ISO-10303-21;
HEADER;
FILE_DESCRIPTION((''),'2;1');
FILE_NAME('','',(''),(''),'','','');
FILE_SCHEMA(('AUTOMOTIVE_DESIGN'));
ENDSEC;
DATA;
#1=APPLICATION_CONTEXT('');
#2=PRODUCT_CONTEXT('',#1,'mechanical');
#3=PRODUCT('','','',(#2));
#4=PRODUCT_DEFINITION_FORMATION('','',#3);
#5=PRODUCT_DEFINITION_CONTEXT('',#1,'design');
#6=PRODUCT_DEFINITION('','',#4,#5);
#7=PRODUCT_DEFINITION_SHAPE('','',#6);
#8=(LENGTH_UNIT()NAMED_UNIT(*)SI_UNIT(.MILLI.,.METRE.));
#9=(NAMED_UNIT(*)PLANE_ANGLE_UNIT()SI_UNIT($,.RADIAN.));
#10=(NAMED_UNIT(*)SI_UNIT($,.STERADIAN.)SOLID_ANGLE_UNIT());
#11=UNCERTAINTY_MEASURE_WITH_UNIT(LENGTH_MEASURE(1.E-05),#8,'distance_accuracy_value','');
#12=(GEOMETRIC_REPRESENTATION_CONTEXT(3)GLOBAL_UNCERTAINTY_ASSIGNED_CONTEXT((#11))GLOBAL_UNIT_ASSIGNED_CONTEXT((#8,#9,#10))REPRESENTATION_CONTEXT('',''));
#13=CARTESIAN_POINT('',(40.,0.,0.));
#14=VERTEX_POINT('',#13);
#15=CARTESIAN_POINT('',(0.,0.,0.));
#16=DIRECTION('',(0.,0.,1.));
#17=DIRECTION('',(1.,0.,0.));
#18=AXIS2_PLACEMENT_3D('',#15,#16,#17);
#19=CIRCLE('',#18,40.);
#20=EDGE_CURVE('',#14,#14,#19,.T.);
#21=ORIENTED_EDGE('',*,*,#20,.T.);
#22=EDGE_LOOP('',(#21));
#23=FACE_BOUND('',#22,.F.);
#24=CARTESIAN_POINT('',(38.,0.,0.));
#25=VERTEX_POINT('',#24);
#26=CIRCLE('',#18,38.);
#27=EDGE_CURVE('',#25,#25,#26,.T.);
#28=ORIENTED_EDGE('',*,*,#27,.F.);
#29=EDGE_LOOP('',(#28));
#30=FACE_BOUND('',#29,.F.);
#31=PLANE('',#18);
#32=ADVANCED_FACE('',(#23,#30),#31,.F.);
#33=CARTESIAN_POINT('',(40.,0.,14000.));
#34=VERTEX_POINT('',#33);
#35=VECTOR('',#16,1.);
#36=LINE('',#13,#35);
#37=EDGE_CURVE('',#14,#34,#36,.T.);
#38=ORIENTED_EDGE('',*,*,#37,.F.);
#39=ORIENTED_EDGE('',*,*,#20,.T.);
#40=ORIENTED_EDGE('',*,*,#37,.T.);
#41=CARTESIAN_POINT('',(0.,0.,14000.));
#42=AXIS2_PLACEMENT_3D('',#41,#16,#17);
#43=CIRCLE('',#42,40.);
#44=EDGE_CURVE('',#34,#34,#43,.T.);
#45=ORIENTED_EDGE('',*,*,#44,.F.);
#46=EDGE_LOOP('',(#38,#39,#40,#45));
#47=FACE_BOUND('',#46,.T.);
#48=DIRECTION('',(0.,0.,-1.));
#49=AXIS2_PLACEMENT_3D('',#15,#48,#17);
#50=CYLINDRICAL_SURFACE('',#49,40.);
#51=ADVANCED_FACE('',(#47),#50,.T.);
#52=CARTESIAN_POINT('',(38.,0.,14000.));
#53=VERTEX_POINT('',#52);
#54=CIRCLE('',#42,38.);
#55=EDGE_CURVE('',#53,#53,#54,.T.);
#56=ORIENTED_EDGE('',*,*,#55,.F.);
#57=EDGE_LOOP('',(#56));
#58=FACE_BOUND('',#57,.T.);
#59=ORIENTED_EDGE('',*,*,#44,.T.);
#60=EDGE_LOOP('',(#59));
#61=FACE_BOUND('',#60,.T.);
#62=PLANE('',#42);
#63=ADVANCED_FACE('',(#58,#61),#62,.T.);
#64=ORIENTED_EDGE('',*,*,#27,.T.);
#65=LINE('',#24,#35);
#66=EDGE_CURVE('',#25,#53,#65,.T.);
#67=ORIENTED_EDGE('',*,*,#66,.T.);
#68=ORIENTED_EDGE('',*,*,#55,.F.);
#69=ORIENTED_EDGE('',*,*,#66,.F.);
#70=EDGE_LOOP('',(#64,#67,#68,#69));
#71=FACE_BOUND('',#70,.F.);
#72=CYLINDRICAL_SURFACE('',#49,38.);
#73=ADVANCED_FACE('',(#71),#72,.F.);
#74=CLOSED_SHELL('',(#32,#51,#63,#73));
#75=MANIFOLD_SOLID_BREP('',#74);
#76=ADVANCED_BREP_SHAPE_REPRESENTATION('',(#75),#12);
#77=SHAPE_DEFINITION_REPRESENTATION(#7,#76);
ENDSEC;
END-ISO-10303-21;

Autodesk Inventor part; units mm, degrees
ref_plane "YZ Plane" through (0, 0, 0) normal (1, 0, 0) x (0, 1, 0)
ref_plane "XZ Plane" through (0, 0, 0) normal (0, 1, 0) x (-1, 0, 0)
ref_plane "XY Plane" through (0, 0, 0) normal (0, 0, 1) x (1, 0, 0)
sketch "Sketch1" plane through (0, 0, 0) normal (0, 0, 1) x (1, 0, 0)
  circle A0 centre (0, 0) radius 40
  circle A1 centre (0, 0) radius 38
  dimension "d0" = 80
  dimension "d1" = 2
extrude "Extrusion1" add sketch "Sketch1" along normal blind 14000
properties part number "CeilingLight"
